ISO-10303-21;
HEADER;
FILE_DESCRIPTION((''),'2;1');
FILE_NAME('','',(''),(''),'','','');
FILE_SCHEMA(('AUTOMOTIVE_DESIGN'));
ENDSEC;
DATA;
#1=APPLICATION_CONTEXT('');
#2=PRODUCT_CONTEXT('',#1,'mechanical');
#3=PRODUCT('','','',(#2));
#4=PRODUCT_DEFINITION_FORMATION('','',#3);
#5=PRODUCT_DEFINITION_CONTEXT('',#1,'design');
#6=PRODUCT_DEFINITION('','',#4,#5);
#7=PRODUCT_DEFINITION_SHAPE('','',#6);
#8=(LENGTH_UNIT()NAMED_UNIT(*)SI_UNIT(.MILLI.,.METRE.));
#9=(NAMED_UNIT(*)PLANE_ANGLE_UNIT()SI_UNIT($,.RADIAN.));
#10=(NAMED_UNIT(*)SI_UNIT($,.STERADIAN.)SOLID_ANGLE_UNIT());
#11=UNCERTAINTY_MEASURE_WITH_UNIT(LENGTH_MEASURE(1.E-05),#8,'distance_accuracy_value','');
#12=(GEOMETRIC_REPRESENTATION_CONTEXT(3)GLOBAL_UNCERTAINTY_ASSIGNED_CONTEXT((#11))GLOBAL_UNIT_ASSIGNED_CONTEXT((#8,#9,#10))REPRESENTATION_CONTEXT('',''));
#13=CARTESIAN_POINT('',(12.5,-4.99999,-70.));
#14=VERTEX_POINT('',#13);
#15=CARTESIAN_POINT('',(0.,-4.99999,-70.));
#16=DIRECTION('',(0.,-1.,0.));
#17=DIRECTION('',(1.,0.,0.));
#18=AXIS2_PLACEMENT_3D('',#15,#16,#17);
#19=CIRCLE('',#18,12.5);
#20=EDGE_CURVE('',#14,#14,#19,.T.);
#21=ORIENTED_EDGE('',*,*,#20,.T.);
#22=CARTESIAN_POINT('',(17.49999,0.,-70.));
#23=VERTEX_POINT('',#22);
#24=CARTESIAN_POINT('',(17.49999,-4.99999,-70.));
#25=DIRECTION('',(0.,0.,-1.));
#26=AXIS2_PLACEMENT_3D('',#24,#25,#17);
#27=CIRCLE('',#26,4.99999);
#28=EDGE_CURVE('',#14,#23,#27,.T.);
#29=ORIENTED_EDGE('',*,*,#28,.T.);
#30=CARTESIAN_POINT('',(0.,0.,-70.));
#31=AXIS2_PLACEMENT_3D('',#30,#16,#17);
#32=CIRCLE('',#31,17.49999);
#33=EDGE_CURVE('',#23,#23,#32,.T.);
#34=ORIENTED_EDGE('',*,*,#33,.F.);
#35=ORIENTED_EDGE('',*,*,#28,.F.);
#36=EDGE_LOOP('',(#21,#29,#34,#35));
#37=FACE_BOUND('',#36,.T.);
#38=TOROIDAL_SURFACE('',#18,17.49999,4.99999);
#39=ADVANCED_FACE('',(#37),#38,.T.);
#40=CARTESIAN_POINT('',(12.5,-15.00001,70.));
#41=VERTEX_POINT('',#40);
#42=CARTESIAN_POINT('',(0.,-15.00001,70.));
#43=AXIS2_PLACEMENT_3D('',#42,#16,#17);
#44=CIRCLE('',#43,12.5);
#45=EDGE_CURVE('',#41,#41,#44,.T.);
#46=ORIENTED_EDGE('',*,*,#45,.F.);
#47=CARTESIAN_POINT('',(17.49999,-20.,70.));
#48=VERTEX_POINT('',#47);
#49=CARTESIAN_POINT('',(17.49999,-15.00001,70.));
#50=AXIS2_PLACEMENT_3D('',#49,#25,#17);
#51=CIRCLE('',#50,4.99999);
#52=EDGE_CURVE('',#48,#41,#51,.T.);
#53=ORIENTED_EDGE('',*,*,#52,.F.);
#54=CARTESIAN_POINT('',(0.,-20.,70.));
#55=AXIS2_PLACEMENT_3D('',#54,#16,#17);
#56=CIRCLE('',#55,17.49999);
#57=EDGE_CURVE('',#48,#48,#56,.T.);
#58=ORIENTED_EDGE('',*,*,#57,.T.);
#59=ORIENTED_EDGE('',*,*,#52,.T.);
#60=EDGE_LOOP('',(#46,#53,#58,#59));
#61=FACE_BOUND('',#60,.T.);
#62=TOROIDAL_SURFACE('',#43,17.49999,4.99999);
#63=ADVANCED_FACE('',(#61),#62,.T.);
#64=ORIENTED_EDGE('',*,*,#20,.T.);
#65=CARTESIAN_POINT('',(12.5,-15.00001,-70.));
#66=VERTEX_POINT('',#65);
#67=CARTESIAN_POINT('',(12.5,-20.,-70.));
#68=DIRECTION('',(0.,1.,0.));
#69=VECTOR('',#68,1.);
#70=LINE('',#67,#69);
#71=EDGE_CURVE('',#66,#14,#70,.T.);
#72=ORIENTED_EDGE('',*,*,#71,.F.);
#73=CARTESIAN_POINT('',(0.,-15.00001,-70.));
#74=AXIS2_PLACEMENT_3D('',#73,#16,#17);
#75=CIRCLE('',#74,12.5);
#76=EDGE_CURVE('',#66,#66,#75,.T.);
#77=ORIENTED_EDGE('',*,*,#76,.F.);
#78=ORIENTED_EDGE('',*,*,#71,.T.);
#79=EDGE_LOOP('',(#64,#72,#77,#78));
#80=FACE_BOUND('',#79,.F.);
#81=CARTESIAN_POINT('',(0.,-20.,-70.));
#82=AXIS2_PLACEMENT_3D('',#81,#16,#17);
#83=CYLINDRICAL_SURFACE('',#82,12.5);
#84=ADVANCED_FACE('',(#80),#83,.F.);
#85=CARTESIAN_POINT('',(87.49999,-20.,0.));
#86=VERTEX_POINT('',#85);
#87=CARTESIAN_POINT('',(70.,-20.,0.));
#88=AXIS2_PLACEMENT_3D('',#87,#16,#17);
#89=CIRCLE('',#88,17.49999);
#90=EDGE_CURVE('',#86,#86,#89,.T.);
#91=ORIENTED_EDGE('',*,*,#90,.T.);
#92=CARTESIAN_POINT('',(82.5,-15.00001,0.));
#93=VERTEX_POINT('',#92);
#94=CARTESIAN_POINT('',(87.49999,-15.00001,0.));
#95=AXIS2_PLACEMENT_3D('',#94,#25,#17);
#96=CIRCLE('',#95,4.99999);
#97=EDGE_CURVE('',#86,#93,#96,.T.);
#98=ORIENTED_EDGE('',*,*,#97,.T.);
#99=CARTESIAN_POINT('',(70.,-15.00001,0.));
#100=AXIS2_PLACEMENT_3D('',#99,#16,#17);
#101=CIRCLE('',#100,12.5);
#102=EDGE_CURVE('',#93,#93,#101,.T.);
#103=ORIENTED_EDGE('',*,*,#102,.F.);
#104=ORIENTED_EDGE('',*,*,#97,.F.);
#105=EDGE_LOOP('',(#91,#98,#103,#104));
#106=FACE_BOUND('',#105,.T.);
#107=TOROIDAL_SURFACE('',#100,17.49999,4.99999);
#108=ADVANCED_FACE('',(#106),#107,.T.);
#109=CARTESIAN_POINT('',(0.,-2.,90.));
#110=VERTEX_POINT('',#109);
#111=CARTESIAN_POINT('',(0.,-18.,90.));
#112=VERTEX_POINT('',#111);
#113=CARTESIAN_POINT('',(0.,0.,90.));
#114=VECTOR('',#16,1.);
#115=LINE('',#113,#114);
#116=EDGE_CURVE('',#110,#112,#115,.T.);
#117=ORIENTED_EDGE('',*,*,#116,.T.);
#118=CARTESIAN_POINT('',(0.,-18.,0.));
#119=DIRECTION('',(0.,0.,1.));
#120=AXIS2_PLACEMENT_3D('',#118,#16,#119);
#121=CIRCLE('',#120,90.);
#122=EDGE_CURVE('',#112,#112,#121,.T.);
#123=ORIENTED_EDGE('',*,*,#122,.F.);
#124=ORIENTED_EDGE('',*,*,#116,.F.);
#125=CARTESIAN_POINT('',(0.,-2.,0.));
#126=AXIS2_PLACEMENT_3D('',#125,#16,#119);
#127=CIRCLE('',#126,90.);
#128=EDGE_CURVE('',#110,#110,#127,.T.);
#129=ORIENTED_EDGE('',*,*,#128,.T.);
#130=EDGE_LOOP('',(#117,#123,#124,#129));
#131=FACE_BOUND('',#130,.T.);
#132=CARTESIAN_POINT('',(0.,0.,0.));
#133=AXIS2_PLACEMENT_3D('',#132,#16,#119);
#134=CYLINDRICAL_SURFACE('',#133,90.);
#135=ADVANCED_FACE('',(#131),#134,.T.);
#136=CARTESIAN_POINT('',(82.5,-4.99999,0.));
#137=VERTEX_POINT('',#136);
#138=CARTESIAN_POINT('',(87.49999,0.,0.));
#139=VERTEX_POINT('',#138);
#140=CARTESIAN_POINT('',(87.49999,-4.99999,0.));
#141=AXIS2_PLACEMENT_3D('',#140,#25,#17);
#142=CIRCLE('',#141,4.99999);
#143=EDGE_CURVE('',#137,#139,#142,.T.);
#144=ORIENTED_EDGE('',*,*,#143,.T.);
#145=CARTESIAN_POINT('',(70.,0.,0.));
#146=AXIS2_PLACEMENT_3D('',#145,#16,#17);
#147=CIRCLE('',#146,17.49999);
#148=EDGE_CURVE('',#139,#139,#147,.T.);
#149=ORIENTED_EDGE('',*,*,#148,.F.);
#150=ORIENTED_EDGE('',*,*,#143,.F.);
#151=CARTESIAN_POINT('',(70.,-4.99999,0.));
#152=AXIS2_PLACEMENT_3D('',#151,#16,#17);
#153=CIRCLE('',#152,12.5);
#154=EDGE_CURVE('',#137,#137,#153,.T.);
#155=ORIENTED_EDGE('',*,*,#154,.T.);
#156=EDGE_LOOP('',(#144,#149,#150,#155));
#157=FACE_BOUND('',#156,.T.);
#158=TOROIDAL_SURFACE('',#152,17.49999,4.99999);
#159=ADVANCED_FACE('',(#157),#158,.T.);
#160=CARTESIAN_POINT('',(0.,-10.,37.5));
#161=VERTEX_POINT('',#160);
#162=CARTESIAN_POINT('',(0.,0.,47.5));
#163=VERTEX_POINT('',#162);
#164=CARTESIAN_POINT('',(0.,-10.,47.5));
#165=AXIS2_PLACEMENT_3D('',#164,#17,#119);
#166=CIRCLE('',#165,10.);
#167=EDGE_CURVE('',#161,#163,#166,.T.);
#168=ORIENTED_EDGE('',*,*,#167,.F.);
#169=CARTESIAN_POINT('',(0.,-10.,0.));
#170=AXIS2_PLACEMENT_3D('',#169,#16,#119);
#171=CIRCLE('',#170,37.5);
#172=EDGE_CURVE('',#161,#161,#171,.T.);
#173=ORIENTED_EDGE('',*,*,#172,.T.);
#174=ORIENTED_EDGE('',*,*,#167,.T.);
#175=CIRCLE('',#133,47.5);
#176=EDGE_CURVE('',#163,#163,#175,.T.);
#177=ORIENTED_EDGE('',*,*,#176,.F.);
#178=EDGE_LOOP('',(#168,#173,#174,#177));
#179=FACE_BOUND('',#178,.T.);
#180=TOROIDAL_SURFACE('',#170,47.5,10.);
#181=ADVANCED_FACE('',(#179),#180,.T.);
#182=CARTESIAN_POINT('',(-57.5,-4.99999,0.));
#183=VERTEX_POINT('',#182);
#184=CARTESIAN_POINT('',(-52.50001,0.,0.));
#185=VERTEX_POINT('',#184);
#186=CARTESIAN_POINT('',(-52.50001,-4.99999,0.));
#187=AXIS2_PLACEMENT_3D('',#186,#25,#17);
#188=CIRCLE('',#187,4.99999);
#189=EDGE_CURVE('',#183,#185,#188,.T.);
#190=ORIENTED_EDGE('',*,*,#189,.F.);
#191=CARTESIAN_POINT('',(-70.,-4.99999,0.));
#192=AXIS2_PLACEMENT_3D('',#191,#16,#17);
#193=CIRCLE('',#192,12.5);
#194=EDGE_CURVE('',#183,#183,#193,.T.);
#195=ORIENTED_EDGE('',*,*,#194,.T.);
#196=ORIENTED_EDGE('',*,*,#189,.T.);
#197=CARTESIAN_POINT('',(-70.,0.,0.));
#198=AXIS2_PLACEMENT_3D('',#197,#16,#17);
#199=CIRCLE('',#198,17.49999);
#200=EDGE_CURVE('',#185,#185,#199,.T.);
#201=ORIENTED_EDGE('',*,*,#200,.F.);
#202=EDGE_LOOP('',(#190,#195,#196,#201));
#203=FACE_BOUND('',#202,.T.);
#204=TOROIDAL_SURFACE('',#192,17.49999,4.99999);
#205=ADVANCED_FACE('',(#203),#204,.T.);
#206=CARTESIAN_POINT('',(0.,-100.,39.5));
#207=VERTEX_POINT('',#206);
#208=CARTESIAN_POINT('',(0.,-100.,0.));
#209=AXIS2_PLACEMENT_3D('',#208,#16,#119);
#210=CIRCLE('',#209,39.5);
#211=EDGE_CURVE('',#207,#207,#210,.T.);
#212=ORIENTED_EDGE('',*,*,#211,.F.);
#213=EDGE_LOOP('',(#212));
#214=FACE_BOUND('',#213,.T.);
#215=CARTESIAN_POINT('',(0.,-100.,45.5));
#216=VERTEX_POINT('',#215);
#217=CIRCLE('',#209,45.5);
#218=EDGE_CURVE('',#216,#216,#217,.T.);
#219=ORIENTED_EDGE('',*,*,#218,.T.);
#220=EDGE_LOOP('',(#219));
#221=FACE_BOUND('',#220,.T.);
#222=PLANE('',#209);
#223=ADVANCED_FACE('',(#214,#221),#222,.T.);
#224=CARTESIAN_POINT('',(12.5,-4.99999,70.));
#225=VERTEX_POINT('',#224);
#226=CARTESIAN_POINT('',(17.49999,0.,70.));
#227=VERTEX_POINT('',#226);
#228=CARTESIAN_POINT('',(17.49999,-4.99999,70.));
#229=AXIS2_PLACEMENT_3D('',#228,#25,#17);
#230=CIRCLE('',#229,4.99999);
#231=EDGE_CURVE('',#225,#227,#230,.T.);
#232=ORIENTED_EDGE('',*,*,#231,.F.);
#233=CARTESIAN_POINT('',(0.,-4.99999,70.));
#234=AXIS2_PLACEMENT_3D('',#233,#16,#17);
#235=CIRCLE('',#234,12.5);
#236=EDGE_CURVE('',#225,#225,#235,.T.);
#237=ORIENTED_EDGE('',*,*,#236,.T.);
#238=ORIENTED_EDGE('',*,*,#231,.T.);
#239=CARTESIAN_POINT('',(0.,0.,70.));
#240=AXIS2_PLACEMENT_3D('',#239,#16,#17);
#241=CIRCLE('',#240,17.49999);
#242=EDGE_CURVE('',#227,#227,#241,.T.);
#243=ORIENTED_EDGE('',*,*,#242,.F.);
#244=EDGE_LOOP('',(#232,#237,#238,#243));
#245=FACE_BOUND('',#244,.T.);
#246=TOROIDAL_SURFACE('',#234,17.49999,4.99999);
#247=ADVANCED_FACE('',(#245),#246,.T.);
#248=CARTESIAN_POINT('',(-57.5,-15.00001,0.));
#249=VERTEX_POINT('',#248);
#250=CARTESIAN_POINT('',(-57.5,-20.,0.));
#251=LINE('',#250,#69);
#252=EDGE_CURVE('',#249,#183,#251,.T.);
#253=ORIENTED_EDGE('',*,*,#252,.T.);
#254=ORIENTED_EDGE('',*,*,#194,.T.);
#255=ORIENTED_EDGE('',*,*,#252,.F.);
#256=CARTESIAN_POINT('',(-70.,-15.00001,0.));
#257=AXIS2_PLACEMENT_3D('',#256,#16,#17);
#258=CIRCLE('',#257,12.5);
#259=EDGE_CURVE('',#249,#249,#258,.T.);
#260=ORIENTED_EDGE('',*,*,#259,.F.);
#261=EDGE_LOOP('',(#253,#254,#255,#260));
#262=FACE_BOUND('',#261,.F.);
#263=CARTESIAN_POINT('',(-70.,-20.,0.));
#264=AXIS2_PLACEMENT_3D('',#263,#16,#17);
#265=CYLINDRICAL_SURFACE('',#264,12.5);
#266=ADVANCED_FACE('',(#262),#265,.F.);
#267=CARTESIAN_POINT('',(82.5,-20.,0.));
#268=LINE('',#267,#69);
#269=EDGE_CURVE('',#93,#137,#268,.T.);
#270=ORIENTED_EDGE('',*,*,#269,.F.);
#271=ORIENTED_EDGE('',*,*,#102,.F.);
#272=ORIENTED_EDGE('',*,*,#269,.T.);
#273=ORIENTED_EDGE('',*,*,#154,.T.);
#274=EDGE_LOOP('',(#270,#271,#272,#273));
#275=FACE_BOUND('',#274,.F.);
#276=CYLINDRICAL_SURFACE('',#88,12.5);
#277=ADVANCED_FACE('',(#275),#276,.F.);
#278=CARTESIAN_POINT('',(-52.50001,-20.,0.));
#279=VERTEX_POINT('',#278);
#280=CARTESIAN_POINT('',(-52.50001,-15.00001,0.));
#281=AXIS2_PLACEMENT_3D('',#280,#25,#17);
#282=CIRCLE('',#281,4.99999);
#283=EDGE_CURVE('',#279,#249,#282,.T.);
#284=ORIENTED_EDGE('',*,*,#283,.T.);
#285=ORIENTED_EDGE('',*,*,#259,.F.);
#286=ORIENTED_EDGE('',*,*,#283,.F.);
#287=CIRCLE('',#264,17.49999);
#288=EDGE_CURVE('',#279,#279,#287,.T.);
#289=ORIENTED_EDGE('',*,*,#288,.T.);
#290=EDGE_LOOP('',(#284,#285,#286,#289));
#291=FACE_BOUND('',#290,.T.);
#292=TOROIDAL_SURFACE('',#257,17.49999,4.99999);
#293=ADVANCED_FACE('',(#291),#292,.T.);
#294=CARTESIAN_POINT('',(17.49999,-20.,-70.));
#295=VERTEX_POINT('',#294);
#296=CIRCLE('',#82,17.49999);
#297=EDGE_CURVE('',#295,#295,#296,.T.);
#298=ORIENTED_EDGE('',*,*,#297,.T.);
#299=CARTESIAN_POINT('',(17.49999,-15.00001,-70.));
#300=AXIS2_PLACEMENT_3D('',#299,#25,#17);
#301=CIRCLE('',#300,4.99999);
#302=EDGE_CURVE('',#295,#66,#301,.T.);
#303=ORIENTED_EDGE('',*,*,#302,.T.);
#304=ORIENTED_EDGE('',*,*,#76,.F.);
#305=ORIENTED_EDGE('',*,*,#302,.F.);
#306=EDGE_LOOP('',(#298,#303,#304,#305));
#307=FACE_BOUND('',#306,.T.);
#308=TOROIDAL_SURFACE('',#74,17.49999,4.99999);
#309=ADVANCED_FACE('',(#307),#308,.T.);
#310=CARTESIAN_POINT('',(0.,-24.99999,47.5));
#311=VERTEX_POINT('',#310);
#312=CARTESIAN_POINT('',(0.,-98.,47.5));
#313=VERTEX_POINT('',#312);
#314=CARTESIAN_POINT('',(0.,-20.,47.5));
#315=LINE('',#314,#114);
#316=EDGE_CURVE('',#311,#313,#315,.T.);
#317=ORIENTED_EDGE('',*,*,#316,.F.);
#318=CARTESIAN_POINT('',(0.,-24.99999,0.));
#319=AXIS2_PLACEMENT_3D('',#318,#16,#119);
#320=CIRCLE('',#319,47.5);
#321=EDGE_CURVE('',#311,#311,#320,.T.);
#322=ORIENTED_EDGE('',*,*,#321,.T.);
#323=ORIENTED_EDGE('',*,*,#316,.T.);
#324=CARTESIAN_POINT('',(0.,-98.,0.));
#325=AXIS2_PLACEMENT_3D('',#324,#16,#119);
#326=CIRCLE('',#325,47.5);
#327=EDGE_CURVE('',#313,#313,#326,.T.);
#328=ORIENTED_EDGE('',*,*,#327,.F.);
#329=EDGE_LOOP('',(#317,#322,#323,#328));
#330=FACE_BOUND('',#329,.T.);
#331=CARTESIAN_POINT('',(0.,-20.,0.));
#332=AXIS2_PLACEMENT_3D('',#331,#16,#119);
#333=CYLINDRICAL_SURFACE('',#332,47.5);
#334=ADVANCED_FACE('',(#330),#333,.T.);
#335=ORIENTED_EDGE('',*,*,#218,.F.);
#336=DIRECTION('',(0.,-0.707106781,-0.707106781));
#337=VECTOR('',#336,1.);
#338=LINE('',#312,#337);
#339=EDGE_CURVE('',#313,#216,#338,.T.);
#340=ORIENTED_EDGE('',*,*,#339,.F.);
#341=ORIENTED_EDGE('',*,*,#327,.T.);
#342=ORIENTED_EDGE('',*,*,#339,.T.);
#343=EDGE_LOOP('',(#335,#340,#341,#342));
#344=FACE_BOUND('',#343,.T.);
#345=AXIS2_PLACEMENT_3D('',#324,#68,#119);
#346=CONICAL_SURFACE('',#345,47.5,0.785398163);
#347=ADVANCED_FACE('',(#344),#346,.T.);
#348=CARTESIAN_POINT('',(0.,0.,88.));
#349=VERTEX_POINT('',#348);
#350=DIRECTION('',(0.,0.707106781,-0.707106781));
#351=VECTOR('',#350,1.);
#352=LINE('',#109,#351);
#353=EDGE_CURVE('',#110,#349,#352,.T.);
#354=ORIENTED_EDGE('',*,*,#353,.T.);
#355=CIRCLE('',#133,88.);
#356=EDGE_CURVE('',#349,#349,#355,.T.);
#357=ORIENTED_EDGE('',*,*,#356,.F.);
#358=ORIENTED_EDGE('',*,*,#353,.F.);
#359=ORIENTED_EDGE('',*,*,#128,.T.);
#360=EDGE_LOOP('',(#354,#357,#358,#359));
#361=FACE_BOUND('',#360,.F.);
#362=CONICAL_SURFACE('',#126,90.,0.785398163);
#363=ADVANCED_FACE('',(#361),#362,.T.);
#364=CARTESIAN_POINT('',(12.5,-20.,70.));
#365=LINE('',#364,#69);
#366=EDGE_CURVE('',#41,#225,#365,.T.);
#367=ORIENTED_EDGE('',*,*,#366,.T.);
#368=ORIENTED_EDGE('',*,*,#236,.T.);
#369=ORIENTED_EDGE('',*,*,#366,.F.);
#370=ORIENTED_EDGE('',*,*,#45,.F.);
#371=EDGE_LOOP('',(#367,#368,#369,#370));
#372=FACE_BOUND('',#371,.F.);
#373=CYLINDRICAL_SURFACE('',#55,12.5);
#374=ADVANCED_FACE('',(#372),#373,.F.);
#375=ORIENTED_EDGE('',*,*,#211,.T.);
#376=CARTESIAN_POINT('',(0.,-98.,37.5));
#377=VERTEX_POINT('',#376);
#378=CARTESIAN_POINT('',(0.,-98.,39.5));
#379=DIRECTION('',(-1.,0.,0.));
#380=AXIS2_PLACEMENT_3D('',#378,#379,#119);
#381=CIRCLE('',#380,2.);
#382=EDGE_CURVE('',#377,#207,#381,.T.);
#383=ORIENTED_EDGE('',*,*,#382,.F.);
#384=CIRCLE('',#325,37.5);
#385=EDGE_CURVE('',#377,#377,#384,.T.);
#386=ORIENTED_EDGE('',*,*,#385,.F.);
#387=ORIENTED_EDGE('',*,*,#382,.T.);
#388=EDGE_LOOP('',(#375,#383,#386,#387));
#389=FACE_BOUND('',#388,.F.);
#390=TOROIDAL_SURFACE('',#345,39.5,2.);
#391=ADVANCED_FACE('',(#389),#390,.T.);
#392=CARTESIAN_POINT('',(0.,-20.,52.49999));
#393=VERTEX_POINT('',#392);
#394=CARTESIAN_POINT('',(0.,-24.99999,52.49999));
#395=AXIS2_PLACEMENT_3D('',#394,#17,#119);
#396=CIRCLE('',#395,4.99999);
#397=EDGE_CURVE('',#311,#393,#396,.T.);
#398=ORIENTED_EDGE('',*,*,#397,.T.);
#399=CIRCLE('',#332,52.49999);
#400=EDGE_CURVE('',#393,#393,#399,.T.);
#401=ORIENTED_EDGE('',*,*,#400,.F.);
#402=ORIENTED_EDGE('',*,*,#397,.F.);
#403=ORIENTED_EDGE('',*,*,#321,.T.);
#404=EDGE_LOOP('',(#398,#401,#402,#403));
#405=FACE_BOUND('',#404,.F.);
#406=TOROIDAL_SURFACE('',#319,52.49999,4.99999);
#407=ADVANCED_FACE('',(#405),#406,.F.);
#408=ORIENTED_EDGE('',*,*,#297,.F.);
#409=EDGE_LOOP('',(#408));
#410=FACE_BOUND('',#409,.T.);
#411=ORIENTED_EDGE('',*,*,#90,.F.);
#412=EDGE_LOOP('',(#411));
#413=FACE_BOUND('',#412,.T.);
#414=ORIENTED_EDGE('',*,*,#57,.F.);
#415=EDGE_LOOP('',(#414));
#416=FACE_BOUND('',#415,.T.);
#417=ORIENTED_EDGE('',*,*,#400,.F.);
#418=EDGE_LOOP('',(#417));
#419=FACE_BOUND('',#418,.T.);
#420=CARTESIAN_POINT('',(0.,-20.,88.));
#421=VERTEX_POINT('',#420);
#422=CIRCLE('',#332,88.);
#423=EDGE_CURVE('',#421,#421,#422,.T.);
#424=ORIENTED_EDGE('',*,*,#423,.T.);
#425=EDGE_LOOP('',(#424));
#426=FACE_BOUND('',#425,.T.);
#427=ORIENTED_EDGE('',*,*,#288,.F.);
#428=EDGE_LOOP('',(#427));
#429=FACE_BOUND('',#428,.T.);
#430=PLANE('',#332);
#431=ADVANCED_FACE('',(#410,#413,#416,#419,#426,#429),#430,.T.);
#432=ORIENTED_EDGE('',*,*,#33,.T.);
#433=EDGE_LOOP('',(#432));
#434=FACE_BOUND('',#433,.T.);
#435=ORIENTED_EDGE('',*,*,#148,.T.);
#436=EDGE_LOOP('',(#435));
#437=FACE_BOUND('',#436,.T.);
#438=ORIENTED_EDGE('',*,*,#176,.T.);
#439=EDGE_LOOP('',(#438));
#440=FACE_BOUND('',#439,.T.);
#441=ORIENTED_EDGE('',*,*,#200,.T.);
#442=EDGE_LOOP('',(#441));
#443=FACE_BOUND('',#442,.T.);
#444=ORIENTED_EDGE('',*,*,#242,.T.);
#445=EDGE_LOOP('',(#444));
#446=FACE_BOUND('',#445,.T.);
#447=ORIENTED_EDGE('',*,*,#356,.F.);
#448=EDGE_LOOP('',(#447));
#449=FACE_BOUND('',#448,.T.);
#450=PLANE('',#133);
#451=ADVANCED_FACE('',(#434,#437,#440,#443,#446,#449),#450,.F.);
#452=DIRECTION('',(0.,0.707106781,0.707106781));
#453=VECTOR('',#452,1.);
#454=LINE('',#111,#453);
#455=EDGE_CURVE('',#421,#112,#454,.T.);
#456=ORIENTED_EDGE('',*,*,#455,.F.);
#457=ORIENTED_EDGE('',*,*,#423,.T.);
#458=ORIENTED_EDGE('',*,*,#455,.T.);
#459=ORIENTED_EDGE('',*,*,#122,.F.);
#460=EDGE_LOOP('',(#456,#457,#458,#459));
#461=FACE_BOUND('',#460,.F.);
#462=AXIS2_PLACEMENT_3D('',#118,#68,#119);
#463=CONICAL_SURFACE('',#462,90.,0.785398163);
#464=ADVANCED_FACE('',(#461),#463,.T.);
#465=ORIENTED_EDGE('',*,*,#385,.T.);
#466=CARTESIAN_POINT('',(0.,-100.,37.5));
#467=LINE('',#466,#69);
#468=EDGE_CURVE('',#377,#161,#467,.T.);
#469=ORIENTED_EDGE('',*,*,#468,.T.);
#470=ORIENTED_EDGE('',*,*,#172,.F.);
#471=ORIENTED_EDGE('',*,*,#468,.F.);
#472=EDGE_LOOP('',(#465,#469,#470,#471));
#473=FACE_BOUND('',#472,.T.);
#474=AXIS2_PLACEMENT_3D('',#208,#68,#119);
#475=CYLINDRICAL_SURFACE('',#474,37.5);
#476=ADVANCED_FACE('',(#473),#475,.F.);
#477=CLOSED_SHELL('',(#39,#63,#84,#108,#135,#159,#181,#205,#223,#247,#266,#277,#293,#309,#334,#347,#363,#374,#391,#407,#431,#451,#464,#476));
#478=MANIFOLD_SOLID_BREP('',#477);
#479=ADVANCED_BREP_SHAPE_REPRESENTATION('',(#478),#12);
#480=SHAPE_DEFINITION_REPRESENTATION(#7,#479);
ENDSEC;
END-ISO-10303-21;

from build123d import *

# Parameters (mm, degrees)
F2_R     = 12.5
F3_DEPTH = 20
F4_SIZE  = 2
F5_R     = 4.99999
F6_R     = 10
F7_R     = 2


# Not quite as in the source:
# - a fillet or chamfer is up to 0.001 mm smaller than in the source, because OpenCascade refuses the exact size


with BuildPart() as f1:
    # F0 (on Right) → F1 (revolve)
    with BuildSketch(Plane.YZ):
        Polygon((-20, 47.5), (-100, 47.5), (-100, 37.5), (0, 37.5), (0, 90), (-20, 90), align=None)
    revolve(axis=Axis((0, -59.8429322233, 0), (0, -1, 0)))

    # F2 (on face) → F3 (cut, through all)
    with BuildSketch(Plane.XZ.offset(20)):
        with Locations((0, 70)):
            Circle(F2_R)
        with Locations((-70, 0)):
            Circle(F2_R)
        with Locations((0, -70)):
            Circle(F2_R)
        with Locations((70, 0)):
            Circle(F2_R)
    extrude(amount=-F3_DEPTH, mode=Mode.SUBTRACT)

    # F4
    f4_edges = [f1.edges().sort_by_distance(p)[0] for p in [
        (0, -100, -47.5),
        (0, -20, -90),
        (0, 0, -90),
    ]]
    chamfer(f4_edges, length=F4_SIZE)

    # F5 (radius 5 in the source; OpenCascade refuses exactly that, so slightly less here)
    f5_edges = [f1.edges().sort_by_distance(p)[0] for p in [
        (0, -20, -47.5),
        (-12.5, -20, 70),
        (57.5, -20, 0),
        (-12.5, -20, -70),
        (-82.5, -20, 0),
        (-82.5, 0, 0),
        (-12.5, 0, 70),
        (57.5, 0, 0),
        (-12.5, 0, -70),
    ]]
    fillet(f5_edges, radius=F5_R)

    # F6
    f6_edges = [f1.edges().sort_by_distance(p)[0] for p in [
        (0, 0, -37.5),
    ]]
    fillet(f6_edges, radius=F6_R)

    # F7
    f7_edges = [f1.edges().sort_by_distance(p)[0] for p in [
        (0, -100, -37.5),
    ]]
    fillet(f7_edges, radius=F7_R)


solid = f1.part
